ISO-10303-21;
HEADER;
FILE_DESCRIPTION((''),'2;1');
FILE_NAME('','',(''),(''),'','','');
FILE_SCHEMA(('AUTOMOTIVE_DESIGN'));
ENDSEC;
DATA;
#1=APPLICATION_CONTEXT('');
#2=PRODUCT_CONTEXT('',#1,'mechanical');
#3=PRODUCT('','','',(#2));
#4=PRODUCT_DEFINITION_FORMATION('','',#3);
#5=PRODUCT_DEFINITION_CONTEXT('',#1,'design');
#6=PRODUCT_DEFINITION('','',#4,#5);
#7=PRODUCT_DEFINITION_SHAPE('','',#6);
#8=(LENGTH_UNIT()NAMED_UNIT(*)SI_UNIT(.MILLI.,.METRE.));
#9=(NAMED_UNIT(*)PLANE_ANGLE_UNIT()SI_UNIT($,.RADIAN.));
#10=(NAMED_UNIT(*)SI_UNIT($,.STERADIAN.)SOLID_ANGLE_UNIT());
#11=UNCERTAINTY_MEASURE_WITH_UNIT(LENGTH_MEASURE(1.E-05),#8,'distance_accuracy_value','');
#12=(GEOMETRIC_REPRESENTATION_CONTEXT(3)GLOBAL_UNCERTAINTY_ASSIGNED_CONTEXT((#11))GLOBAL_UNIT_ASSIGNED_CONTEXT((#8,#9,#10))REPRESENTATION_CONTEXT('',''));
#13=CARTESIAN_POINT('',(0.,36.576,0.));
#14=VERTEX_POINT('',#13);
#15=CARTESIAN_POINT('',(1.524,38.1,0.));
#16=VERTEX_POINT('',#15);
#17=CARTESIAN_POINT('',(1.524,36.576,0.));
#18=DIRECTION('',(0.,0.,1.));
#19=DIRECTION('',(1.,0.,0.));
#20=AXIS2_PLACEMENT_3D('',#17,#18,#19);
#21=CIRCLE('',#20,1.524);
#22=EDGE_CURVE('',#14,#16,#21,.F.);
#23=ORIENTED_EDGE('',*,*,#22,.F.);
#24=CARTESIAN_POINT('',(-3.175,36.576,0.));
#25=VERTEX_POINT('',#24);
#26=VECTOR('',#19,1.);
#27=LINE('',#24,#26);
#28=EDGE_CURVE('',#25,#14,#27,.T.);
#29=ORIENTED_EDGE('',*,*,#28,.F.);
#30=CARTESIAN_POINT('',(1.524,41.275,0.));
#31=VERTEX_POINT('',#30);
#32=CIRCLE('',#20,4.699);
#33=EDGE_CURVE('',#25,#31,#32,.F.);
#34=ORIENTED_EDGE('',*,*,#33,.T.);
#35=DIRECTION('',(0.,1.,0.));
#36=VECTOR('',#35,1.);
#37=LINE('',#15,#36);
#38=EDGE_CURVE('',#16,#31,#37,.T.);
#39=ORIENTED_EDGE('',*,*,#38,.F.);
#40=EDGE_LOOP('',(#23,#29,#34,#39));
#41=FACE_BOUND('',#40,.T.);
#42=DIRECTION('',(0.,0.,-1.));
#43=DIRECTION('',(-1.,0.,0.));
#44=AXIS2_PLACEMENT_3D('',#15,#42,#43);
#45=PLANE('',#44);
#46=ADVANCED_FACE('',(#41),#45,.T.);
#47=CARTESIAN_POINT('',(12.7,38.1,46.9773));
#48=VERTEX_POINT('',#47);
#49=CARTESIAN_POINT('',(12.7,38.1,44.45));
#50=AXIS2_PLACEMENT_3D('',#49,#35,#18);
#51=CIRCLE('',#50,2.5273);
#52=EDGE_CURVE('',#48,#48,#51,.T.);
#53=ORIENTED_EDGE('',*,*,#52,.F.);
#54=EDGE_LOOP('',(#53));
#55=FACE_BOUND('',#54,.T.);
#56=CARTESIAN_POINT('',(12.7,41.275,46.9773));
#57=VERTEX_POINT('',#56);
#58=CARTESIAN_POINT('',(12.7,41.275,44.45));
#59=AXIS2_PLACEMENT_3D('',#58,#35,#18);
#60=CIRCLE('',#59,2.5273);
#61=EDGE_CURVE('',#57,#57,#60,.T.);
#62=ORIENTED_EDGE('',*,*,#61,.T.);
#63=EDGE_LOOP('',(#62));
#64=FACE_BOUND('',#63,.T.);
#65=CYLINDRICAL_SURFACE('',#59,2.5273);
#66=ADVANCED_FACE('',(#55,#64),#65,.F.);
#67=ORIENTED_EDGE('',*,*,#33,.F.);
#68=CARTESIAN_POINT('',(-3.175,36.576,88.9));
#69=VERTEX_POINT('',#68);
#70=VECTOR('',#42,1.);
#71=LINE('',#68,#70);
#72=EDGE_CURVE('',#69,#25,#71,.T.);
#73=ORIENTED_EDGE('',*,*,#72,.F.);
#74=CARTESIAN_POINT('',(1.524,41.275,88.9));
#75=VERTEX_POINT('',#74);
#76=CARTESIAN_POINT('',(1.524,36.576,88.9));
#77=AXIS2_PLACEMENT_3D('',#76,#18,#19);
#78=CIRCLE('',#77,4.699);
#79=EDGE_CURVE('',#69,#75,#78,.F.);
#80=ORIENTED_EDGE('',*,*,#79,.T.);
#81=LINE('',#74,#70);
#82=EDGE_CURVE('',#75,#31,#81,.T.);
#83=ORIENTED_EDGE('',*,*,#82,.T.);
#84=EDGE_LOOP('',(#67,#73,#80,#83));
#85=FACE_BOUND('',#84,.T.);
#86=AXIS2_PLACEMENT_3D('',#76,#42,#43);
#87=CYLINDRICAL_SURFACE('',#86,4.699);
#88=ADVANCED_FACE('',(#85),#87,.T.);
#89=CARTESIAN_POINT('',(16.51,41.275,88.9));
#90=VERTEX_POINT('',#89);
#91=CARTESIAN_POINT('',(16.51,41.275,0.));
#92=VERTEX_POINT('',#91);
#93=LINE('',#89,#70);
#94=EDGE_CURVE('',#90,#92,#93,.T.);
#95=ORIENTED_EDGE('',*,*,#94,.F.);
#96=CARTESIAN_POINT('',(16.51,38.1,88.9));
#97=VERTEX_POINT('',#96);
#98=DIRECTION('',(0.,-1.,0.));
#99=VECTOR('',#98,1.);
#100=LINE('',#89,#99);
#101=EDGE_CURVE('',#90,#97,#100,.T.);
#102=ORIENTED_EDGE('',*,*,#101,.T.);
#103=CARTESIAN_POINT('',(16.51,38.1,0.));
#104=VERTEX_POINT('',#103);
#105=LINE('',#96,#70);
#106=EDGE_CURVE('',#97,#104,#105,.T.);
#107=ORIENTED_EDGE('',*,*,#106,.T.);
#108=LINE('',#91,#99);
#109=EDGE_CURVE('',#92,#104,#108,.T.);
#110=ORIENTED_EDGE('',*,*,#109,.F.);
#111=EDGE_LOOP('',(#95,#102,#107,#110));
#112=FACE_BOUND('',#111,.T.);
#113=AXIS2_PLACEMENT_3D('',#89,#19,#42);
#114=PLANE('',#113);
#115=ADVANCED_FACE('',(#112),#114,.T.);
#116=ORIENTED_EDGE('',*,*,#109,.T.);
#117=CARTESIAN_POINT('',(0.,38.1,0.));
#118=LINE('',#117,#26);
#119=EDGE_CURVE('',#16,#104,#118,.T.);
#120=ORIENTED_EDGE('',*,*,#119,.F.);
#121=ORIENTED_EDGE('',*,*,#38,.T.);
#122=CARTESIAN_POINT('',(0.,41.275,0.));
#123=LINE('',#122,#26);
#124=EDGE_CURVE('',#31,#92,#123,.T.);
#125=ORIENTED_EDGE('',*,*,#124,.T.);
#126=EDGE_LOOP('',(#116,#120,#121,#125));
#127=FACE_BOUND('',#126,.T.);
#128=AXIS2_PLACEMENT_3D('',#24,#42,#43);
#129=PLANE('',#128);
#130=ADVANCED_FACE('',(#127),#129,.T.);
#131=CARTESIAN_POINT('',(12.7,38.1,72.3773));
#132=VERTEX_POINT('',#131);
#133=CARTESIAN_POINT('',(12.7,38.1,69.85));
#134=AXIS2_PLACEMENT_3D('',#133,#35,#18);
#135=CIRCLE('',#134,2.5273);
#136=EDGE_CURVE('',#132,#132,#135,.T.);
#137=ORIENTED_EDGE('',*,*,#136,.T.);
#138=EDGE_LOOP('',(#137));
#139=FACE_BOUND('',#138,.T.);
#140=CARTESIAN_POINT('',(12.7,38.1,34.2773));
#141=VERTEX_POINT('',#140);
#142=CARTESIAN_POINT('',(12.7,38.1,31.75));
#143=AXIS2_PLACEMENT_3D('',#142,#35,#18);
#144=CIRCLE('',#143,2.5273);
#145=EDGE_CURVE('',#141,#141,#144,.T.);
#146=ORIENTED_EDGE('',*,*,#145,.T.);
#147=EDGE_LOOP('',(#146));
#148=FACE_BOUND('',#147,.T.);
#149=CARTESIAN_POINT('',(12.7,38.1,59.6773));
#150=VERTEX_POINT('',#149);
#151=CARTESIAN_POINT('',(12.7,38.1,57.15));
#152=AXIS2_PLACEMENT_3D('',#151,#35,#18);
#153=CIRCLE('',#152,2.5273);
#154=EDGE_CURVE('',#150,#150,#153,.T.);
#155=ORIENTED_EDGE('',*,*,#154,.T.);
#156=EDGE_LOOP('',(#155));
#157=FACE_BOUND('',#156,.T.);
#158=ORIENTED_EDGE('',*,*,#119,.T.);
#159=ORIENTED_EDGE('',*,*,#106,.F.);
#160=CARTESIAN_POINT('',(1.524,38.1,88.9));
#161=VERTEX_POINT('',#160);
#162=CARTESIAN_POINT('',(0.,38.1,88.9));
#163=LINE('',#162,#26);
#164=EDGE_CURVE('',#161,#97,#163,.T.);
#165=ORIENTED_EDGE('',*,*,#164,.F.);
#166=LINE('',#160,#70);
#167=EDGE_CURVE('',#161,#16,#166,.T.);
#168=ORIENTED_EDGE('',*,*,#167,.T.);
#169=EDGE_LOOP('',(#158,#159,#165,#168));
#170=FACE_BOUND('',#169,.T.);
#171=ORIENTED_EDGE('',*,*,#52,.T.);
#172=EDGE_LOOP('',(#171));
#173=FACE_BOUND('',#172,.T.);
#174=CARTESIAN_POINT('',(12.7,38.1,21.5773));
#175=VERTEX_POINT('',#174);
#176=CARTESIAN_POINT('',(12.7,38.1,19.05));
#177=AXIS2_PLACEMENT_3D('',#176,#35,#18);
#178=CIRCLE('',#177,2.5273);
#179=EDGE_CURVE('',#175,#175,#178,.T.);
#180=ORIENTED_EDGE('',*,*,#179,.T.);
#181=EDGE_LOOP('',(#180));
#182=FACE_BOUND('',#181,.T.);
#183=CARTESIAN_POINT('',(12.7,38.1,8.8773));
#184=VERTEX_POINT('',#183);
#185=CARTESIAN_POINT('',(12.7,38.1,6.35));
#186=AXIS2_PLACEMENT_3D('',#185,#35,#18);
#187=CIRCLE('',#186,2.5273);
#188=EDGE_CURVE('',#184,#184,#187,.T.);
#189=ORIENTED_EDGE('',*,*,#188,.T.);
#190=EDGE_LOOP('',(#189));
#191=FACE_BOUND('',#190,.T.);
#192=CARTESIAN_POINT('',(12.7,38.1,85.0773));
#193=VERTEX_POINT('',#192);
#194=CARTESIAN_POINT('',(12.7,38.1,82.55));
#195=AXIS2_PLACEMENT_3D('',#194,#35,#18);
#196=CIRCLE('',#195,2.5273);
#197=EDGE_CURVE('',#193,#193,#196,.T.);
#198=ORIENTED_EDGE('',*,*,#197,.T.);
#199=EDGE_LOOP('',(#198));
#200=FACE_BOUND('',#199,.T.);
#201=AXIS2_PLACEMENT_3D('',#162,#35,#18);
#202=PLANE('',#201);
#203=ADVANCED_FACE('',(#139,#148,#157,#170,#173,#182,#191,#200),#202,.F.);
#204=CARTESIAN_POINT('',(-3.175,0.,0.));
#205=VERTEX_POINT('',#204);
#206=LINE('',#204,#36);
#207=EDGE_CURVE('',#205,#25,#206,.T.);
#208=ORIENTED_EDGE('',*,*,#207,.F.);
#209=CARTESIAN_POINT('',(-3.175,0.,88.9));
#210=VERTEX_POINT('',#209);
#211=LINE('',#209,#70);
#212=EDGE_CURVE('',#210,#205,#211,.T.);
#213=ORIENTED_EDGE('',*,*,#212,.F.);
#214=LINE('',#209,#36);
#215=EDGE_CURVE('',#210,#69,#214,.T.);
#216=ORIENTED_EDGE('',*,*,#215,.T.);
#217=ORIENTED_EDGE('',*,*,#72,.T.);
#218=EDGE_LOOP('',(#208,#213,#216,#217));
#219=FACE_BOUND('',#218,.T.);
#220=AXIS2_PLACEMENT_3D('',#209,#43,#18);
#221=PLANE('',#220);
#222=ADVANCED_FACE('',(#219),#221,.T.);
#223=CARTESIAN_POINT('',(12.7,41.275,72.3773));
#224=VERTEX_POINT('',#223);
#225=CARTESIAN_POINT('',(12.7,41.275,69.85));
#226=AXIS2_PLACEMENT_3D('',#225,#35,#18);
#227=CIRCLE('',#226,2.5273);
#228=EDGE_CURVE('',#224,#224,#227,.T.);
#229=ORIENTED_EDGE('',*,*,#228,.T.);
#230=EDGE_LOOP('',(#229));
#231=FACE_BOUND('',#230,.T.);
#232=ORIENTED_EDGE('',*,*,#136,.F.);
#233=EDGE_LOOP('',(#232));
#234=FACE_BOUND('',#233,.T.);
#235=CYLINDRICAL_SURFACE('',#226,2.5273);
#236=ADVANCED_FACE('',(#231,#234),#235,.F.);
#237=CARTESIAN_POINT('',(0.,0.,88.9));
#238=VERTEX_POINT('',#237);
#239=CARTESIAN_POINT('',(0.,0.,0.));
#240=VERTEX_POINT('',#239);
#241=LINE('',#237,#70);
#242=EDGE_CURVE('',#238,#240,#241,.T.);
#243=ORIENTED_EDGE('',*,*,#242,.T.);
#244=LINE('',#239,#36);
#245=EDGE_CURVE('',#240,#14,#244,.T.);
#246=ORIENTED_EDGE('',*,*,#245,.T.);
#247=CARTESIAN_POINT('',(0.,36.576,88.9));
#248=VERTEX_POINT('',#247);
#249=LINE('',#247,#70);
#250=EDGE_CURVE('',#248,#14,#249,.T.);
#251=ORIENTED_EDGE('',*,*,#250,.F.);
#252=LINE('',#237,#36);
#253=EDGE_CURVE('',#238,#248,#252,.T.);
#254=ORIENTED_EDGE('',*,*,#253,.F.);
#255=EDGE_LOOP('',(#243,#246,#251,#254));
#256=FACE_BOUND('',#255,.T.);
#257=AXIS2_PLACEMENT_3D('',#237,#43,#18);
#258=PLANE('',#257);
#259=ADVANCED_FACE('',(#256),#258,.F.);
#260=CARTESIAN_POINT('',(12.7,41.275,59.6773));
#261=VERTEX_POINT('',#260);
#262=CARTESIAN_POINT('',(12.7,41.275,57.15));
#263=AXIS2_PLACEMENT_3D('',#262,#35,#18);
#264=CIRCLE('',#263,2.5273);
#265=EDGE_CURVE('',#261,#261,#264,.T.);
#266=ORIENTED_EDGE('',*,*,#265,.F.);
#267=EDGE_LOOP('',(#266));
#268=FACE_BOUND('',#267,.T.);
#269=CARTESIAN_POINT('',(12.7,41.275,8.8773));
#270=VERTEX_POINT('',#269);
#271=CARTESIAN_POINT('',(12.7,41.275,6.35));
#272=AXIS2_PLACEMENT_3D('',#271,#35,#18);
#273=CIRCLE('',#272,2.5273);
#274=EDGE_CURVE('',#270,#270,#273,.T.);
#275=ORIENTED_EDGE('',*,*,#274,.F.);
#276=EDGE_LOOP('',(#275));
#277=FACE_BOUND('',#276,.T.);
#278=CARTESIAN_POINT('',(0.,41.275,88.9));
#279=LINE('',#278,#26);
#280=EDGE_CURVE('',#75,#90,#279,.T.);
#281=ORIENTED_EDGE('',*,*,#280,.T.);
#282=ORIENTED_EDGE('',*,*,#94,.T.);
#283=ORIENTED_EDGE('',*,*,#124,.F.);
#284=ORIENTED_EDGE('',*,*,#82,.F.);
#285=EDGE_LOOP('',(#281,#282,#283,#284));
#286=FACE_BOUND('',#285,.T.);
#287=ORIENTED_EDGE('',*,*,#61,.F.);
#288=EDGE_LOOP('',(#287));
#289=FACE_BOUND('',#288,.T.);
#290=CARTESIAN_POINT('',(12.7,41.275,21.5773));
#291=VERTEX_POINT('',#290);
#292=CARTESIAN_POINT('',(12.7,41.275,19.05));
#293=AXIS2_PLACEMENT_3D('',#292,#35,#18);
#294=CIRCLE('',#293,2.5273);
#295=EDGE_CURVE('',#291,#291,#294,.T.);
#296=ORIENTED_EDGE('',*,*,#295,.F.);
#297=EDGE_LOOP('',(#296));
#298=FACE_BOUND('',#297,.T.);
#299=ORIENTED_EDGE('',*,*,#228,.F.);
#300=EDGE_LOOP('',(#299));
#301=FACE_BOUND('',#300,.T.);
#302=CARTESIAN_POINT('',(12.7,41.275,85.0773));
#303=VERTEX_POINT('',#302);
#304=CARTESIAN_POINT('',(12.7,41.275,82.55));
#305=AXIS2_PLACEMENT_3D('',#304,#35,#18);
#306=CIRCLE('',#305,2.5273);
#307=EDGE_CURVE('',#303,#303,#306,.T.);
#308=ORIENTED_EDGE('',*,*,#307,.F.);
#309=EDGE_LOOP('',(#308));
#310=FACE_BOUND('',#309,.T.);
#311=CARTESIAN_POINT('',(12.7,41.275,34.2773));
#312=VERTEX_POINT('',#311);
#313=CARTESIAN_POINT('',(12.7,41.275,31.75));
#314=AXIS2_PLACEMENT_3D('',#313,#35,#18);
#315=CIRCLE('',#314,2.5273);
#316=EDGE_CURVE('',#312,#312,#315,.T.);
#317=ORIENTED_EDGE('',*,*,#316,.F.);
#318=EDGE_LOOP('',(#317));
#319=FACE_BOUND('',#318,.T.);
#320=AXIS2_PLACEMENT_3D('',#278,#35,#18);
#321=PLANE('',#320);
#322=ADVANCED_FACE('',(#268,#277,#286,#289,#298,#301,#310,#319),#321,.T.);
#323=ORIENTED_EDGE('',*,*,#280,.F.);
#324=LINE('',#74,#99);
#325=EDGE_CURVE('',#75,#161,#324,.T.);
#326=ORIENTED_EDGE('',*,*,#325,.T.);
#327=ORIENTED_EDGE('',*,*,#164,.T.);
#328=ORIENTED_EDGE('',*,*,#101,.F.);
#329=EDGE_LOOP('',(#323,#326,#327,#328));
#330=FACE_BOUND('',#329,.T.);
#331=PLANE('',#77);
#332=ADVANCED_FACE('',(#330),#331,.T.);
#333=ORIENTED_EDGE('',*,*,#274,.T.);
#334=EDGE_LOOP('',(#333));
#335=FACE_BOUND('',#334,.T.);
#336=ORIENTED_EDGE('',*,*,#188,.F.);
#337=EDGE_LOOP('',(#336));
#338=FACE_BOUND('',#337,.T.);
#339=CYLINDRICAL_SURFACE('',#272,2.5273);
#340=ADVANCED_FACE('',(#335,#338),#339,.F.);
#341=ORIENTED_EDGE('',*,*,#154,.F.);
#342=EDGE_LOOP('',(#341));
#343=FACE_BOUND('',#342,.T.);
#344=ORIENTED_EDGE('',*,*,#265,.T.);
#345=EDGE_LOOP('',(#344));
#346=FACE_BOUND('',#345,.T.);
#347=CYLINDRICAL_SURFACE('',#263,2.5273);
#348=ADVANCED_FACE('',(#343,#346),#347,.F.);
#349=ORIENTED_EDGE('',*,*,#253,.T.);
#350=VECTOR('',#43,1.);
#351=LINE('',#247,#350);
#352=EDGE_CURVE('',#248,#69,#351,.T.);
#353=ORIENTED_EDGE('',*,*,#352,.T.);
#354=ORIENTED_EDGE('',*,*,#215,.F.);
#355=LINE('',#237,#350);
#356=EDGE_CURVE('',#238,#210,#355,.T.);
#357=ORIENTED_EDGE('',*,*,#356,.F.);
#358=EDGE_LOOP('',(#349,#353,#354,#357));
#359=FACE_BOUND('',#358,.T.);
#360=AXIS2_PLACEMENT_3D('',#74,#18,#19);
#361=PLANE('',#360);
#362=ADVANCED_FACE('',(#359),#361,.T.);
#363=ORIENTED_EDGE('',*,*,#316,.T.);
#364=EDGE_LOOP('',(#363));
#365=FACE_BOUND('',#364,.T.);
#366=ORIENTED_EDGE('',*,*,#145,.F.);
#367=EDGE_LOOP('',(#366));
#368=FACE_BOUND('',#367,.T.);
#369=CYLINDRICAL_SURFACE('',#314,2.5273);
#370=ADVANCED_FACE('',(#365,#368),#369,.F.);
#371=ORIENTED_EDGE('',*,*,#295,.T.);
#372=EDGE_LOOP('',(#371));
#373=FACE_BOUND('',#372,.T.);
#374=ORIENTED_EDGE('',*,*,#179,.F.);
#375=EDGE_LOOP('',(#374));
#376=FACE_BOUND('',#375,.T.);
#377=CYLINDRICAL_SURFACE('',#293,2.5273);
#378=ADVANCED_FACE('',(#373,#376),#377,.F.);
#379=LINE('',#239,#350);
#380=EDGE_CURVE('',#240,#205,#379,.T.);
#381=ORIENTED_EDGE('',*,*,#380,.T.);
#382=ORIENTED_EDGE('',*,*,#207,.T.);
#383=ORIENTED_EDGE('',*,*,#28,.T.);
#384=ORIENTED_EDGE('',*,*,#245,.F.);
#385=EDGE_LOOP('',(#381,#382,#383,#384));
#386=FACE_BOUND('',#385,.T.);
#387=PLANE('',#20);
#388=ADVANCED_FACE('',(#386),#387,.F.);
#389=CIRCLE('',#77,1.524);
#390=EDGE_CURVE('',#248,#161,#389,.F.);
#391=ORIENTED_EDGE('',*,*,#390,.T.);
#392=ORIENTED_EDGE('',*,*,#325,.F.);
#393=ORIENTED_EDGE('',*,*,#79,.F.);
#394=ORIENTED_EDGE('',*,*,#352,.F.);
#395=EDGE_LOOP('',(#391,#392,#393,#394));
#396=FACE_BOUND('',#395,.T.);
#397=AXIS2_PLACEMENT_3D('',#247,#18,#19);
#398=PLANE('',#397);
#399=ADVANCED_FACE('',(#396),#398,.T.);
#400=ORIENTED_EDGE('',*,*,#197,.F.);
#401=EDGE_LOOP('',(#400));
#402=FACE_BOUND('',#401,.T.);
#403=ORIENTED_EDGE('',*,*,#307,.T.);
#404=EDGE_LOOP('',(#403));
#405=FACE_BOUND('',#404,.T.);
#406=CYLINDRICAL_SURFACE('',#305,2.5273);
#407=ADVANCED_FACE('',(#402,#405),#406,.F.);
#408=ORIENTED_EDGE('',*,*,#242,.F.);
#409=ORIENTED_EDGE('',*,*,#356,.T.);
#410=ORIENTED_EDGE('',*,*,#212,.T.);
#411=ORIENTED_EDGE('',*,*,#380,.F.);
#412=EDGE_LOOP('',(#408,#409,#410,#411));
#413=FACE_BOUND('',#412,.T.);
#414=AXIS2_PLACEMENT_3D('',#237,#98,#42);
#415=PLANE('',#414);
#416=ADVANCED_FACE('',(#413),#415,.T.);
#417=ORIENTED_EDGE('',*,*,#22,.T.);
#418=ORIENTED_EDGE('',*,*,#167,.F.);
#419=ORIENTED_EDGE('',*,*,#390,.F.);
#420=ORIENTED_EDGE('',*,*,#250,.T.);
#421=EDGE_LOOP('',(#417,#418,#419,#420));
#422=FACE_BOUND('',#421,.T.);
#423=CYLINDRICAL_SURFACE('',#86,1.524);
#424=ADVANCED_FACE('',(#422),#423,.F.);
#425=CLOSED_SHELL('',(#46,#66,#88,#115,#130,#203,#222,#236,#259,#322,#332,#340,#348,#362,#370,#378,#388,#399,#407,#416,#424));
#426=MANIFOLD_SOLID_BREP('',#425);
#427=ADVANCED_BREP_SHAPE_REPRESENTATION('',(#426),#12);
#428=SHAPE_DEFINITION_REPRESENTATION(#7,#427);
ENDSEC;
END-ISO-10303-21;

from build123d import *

# Parameters (mm, degrees)
BASE_FLANGE1_DEPTH         = 88.9
F_8_0_199_DIAMETER_HOLE1_D = 5.0546


# Sheet-metal steps are written as plain solids
with BuildPart() as part:
    # Sketch1 → Base-Flange1 (new body)
    with BuildSketch(Plane.XY):
        with BuildLine():
            Line((0, 0), (0, 36.576))
            ThreePointArc((0, 36.576), (0.446369265, 37.653630735), (1.524, 38.1))
            Line((1.524, 38.1), (16.51, 38.1))
            Line((16.51, 38.1), (16.51, 41.275))
            Line((16.51, 41.275), (1.524, 41.275))
            ThreePointArc((1.524, 41.275), (-1.798694765, 39.898694765), (-3.175, 36.576))
            Line((-3.175, 36.576), (-3.175, 0))
            Line((-3.175, 0), (0, 0))
        make_face()
    extrude(amount=BASE_FLANGE1_DEPTH)

    # #8 (0.199) Diameter Hole1 (through all)
    with Locations(Plane(origin=(12.7, 41.275, 6.35), x_dir=(0, 0, 1), z_dir=(0, 1, 0))):
        with Locations((0, 0), (12.7, 0), (25.4, 0), (38.1, 0), (50.8, 0), (63.5, 0), (76.2, 0)):
            Hole(F_8_0_199_DIAMETER_HOLE1_D / 2)


solid = part.part
